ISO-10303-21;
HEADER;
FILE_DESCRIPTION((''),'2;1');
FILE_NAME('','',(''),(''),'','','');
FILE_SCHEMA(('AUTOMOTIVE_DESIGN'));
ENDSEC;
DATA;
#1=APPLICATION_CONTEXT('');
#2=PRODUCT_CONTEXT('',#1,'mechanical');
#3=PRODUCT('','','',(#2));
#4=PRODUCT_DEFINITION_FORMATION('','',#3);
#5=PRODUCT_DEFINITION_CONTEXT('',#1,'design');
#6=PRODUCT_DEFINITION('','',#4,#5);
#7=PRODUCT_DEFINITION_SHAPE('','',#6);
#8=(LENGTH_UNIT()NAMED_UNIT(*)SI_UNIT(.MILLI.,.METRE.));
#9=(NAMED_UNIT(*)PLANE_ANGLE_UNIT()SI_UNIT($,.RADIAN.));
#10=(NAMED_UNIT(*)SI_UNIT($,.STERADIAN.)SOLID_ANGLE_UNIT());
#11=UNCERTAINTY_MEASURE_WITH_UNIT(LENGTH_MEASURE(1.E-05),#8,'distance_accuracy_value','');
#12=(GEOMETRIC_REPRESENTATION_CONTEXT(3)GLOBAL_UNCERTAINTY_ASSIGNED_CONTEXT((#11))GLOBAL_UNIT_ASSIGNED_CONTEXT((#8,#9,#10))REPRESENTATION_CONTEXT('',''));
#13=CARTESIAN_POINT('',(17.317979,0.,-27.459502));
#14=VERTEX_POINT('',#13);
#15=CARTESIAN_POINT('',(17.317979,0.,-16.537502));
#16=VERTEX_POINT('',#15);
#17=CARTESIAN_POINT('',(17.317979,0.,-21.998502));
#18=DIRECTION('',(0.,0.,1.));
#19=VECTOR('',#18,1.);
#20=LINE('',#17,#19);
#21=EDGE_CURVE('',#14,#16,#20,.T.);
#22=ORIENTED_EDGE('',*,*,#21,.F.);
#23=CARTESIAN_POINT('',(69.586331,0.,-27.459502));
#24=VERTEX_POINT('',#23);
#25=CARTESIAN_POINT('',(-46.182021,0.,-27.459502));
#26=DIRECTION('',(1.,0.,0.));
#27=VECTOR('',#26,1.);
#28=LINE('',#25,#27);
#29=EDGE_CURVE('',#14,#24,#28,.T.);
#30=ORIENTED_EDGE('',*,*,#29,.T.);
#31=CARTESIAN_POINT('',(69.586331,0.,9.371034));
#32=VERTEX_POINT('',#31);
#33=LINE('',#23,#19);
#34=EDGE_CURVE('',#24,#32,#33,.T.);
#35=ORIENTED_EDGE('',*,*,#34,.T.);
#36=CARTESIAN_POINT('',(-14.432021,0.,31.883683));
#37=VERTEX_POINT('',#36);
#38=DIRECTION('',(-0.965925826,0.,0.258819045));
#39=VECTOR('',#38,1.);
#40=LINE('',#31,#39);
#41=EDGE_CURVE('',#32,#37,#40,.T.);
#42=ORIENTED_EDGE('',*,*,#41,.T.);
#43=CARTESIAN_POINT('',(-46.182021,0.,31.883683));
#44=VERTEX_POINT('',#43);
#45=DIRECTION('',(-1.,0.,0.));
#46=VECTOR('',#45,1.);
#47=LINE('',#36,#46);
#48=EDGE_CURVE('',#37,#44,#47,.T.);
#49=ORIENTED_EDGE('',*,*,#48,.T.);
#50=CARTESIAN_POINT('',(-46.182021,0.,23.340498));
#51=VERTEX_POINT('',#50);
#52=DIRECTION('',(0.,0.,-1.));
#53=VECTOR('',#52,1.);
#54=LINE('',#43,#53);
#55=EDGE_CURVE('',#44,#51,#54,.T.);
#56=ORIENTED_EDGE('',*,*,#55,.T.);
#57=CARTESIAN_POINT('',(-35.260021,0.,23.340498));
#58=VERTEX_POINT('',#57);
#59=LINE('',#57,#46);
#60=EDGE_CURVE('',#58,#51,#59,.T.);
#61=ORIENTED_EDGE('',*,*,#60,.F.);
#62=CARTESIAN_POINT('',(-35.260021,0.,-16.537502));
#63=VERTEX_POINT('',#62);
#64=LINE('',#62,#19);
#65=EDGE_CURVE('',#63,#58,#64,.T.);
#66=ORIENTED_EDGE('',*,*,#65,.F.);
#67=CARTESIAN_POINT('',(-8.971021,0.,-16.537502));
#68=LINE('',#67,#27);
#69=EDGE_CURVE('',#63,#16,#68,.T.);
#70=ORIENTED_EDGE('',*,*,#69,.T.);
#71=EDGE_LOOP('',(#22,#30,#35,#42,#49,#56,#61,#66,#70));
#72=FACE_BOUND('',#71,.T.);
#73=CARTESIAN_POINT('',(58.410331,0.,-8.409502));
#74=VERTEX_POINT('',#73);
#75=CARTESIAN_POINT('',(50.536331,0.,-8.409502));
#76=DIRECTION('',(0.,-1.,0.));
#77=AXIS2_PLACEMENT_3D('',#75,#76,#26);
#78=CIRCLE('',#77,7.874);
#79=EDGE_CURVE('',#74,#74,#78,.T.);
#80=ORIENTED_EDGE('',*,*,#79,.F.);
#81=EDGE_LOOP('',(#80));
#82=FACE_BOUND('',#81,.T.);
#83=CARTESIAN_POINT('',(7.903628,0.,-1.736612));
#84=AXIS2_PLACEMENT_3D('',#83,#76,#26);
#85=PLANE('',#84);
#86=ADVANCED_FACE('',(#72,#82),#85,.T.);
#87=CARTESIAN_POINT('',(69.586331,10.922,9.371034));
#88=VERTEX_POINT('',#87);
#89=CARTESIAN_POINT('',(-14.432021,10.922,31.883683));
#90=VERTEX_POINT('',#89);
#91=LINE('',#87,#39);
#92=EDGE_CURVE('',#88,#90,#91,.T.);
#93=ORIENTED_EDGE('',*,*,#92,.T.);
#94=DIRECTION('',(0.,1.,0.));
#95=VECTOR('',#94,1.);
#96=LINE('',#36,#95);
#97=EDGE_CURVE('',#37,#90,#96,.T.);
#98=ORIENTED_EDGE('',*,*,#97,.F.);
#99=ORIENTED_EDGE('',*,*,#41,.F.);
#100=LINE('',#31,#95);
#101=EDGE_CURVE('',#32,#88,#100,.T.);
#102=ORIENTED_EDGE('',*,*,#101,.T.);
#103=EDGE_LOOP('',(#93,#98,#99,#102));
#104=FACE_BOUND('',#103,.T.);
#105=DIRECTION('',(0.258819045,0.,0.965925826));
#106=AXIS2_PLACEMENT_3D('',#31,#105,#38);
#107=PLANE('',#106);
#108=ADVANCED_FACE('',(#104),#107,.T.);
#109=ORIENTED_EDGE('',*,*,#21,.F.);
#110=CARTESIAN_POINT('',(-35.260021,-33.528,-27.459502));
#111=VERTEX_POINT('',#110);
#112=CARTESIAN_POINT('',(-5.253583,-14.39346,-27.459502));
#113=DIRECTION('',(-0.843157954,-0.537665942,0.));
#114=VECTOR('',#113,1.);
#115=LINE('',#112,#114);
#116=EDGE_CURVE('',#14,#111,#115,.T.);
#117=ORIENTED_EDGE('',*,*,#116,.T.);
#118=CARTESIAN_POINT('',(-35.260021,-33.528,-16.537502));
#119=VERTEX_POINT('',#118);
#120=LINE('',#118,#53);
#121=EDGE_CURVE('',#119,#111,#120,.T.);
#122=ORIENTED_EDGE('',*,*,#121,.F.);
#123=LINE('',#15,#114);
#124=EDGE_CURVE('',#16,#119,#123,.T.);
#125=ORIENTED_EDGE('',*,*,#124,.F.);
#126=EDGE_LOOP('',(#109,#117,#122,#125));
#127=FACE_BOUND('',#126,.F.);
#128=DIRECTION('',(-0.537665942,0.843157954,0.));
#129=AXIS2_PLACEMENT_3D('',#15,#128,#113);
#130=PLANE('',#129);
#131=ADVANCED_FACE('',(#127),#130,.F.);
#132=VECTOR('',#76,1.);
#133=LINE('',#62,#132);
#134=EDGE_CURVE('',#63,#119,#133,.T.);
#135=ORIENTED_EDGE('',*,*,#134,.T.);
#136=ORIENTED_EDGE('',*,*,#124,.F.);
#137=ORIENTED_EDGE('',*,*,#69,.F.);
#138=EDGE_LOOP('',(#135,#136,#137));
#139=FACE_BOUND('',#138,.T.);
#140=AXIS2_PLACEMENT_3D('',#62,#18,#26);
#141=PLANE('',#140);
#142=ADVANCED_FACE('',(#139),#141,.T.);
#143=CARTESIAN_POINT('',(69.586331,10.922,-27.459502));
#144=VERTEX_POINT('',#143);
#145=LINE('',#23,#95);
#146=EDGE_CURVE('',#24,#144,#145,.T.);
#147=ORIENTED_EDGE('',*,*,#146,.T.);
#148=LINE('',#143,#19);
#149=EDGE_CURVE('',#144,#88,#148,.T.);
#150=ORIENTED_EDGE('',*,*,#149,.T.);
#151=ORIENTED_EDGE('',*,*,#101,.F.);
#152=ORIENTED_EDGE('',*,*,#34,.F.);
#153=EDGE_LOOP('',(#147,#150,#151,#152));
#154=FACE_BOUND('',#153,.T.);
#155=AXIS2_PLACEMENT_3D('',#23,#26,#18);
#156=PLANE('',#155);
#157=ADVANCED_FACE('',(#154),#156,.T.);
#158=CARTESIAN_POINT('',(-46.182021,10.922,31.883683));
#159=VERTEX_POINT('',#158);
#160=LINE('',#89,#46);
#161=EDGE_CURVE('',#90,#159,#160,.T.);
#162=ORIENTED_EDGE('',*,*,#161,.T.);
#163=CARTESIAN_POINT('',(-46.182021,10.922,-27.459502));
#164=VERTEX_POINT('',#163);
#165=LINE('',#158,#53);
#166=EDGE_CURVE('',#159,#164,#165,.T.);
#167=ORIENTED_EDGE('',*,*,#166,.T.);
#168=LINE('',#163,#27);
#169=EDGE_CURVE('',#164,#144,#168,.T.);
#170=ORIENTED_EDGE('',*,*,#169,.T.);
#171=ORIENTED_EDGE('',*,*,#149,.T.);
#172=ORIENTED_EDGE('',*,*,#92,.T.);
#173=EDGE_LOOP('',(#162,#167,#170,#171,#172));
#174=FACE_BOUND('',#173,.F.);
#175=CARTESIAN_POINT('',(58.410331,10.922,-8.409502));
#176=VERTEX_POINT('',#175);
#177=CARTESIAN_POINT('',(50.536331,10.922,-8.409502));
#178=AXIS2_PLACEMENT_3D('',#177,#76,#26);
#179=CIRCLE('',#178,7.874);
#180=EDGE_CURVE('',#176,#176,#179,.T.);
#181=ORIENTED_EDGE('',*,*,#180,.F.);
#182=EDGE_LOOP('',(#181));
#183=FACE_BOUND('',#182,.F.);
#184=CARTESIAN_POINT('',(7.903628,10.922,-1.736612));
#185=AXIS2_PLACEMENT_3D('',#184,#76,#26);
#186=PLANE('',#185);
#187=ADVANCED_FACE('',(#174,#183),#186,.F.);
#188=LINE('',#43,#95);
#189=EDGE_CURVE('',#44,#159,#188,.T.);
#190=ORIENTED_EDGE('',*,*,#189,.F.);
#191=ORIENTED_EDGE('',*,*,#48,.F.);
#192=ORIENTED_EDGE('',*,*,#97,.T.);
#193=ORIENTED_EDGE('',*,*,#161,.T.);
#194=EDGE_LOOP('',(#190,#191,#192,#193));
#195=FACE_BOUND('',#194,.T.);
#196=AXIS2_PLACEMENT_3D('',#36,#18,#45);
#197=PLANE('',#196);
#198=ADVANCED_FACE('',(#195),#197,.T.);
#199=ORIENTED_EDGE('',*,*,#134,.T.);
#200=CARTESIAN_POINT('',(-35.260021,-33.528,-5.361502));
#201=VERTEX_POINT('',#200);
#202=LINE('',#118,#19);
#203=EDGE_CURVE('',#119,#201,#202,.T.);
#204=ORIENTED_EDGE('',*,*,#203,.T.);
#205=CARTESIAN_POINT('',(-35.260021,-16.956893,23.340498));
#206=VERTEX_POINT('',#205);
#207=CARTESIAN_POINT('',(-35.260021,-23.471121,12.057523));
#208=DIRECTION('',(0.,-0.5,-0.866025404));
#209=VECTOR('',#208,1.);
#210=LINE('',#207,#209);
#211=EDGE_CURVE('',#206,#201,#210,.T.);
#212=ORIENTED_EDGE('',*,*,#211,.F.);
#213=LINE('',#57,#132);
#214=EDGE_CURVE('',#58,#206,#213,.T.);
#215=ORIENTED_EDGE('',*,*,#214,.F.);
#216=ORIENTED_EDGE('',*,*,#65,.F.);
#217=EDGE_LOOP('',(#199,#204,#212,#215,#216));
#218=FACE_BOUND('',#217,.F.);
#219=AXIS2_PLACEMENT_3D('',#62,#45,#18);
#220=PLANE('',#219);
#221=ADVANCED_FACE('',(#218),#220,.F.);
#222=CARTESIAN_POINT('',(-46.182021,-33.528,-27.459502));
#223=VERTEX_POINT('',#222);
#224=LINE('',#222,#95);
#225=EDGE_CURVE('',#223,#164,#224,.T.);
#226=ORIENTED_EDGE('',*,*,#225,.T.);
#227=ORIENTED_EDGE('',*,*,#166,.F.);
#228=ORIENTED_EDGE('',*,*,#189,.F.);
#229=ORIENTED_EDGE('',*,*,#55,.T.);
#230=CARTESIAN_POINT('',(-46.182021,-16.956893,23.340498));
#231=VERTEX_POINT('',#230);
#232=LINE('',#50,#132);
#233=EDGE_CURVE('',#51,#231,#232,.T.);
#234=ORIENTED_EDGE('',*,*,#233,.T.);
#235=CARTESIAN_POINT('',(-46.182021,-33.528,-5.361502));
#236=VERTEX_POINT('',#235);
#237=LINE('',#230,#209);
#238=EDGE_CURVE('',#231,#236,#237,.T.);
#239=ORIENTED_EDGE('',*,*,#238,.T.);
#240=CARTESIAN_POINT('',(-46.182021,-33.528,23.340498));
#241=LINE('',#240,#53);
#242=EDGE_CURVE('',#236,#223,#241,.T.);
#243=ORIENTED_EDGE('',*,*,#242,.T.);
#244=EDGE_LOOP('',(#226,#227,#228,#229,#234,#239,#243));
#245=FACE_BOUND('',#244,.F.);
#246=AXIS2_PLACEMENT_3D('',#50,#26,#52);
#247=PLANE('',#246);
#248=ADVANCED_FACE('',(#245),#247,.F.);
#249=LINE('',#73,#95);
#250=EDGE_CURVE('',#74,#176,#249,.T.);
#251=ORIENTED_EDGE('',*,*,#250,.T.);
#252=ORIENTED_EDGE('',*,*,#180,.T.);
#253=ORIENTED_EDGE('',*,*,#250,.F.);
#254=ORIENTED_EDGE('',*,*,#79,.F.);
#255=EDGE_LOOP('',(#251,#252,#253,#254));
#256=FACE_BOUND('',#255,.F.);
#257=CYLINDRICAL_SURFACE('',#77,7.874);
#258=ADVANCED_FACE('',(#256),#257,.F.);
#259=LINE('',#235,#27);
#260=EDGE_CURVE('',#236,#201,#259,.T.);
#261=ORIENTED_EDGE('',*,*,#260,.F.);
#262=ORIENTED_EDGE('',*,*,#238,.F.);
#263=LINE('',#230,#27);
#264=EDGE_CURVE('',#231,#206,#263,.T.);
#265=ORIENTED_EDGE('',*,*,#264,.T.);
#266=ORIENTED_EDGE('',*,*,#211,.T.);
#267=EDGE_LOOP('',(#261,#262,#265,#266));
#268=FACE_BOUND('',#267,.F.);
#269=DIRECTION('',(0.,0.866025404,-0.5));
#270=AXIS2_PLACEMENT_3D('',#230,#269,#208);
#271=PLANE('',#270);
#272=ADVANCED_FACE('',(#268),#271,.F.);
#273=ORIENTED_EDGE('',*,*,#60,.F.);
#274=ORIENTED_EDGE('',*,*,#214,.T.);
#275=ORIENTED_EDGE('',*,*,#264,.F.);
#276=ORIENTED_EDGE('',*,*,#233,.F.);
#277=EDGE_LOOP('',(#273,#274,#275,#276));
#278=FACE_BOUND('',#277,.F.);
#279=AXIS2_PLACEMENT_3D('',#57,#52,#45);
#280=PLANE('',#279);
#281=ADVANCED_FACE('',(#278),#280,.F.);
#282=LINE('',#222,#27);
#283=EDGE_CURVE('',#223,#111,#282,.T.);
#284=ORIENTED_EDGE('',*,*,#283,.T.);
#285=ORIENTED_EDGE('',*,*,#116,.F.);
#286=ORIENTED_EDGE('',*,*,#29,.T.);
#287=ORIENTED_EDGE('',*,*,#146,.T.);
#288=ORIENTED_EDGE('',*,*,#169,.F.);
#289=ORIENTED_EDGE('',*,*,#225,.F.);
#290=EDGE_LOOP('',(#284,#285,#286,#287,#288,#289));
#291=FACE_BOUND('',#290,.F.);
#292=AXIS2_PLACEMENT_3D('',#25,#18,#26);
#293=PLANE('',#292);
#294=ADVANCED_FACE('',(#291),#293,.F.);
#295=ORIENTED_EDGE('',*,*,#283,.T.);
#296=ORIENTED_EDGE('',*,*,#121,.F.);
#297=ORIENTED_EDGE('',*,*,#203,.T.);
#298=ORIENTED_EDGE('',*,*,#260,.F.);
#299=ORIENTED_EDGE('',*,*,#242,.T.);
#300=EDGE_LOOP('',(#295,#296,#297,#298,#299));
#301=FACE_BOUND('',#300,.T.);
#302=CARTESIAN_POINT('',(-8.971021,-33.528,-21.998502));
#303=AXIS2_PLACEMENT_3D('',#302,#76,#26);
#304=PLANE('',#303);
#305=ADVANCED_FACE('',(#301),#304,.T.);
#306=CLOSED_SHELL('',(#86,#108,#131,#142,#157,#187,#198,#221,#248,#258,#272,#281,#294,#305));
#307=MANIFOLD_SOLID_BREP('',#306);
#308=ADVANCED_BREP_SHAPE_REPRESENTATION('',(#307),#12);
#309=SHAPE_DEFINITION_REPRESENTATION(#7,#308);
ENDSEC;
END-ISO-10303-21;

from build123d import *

# Parameters (mm, degrees)
F1_DEPTH = 10.922
F2_W     = 52.578
F2_H     = 10.922
F3_DEPTH = 33.528
F5_DEPTH = 10.923
F7_DEPTH = 115.7693519126
F8_R     = 7.874
F9_DEPTH = 10.923


# Not quite as in the source:
# - a feature names something its author has since deleted; it is built from what else it names


with BuildPart() as f1:
    # F0 (on Front) → F1 (new body)
    with BuildSketch(Plane.XZ):
        Polygon((-14.4320207924, 31.8836830556), (-46.1820207924, 31.8836830556), (-46.1820207924, -27.459501562), (-34.950372705, -27.459501562), (69.5863311203, -27.459501562), (69.5863311203, 9.3710335113), align=None)
    extrude(amount=-F1_DEPTH)

    # F2 (on face) → F3 (join)
    with BuildSketch(Plane.XZ):
        with Locations((-8.9710207924, -21.998501562)):
            Rectangle(F2_W, F2_H)
        Polygon((-35.2600207924, 23.340498438), (-46.1820207924, 23.340498438), (-46.1820207924, -27.459501562), (-35.2600207924, -27.459501562), (-35.2600207924, -16.537501562), align=None)
    extrude(amount=F3_DEPTH)

    # F4 (on face) → F5 (cut, through all)
    with BuildSketch(Plane.XY.offset(-16.537501562)):
        Polygon((17.3179792076, -33.528), (17.3179792076, 0), (-35.2600207924, -33.528), align=None)
    extrude(amount=-F5_DEPTH, mode=Mode.SUBTRACT)

    # F6 (on face) → F7 (cut, through all)
    with BuildSketch(Plane(origin=(-46.1820207924, 0, 0), x_dir=(0, -1, 0), z_dir=(-1, 0, 0))):
        Polygon((16.9568925737, 23.340498438), (33.528, -5.361501562), (33.528, 23.340498438), align=None)
    extrude(amount=-F7_DEPTH, mode=Mode.SUBTRACT)

    # F8 (on face) → F9 (cut, through all)
    with BuildSketch(Plane.XZ):
        with Locations((50.5363311203, -8.409501562)):
            Circle(F8_R)
    extrude(amount=-F9_DEPTH, mode=Mode.SUBTRACT)


solid = f1.part
